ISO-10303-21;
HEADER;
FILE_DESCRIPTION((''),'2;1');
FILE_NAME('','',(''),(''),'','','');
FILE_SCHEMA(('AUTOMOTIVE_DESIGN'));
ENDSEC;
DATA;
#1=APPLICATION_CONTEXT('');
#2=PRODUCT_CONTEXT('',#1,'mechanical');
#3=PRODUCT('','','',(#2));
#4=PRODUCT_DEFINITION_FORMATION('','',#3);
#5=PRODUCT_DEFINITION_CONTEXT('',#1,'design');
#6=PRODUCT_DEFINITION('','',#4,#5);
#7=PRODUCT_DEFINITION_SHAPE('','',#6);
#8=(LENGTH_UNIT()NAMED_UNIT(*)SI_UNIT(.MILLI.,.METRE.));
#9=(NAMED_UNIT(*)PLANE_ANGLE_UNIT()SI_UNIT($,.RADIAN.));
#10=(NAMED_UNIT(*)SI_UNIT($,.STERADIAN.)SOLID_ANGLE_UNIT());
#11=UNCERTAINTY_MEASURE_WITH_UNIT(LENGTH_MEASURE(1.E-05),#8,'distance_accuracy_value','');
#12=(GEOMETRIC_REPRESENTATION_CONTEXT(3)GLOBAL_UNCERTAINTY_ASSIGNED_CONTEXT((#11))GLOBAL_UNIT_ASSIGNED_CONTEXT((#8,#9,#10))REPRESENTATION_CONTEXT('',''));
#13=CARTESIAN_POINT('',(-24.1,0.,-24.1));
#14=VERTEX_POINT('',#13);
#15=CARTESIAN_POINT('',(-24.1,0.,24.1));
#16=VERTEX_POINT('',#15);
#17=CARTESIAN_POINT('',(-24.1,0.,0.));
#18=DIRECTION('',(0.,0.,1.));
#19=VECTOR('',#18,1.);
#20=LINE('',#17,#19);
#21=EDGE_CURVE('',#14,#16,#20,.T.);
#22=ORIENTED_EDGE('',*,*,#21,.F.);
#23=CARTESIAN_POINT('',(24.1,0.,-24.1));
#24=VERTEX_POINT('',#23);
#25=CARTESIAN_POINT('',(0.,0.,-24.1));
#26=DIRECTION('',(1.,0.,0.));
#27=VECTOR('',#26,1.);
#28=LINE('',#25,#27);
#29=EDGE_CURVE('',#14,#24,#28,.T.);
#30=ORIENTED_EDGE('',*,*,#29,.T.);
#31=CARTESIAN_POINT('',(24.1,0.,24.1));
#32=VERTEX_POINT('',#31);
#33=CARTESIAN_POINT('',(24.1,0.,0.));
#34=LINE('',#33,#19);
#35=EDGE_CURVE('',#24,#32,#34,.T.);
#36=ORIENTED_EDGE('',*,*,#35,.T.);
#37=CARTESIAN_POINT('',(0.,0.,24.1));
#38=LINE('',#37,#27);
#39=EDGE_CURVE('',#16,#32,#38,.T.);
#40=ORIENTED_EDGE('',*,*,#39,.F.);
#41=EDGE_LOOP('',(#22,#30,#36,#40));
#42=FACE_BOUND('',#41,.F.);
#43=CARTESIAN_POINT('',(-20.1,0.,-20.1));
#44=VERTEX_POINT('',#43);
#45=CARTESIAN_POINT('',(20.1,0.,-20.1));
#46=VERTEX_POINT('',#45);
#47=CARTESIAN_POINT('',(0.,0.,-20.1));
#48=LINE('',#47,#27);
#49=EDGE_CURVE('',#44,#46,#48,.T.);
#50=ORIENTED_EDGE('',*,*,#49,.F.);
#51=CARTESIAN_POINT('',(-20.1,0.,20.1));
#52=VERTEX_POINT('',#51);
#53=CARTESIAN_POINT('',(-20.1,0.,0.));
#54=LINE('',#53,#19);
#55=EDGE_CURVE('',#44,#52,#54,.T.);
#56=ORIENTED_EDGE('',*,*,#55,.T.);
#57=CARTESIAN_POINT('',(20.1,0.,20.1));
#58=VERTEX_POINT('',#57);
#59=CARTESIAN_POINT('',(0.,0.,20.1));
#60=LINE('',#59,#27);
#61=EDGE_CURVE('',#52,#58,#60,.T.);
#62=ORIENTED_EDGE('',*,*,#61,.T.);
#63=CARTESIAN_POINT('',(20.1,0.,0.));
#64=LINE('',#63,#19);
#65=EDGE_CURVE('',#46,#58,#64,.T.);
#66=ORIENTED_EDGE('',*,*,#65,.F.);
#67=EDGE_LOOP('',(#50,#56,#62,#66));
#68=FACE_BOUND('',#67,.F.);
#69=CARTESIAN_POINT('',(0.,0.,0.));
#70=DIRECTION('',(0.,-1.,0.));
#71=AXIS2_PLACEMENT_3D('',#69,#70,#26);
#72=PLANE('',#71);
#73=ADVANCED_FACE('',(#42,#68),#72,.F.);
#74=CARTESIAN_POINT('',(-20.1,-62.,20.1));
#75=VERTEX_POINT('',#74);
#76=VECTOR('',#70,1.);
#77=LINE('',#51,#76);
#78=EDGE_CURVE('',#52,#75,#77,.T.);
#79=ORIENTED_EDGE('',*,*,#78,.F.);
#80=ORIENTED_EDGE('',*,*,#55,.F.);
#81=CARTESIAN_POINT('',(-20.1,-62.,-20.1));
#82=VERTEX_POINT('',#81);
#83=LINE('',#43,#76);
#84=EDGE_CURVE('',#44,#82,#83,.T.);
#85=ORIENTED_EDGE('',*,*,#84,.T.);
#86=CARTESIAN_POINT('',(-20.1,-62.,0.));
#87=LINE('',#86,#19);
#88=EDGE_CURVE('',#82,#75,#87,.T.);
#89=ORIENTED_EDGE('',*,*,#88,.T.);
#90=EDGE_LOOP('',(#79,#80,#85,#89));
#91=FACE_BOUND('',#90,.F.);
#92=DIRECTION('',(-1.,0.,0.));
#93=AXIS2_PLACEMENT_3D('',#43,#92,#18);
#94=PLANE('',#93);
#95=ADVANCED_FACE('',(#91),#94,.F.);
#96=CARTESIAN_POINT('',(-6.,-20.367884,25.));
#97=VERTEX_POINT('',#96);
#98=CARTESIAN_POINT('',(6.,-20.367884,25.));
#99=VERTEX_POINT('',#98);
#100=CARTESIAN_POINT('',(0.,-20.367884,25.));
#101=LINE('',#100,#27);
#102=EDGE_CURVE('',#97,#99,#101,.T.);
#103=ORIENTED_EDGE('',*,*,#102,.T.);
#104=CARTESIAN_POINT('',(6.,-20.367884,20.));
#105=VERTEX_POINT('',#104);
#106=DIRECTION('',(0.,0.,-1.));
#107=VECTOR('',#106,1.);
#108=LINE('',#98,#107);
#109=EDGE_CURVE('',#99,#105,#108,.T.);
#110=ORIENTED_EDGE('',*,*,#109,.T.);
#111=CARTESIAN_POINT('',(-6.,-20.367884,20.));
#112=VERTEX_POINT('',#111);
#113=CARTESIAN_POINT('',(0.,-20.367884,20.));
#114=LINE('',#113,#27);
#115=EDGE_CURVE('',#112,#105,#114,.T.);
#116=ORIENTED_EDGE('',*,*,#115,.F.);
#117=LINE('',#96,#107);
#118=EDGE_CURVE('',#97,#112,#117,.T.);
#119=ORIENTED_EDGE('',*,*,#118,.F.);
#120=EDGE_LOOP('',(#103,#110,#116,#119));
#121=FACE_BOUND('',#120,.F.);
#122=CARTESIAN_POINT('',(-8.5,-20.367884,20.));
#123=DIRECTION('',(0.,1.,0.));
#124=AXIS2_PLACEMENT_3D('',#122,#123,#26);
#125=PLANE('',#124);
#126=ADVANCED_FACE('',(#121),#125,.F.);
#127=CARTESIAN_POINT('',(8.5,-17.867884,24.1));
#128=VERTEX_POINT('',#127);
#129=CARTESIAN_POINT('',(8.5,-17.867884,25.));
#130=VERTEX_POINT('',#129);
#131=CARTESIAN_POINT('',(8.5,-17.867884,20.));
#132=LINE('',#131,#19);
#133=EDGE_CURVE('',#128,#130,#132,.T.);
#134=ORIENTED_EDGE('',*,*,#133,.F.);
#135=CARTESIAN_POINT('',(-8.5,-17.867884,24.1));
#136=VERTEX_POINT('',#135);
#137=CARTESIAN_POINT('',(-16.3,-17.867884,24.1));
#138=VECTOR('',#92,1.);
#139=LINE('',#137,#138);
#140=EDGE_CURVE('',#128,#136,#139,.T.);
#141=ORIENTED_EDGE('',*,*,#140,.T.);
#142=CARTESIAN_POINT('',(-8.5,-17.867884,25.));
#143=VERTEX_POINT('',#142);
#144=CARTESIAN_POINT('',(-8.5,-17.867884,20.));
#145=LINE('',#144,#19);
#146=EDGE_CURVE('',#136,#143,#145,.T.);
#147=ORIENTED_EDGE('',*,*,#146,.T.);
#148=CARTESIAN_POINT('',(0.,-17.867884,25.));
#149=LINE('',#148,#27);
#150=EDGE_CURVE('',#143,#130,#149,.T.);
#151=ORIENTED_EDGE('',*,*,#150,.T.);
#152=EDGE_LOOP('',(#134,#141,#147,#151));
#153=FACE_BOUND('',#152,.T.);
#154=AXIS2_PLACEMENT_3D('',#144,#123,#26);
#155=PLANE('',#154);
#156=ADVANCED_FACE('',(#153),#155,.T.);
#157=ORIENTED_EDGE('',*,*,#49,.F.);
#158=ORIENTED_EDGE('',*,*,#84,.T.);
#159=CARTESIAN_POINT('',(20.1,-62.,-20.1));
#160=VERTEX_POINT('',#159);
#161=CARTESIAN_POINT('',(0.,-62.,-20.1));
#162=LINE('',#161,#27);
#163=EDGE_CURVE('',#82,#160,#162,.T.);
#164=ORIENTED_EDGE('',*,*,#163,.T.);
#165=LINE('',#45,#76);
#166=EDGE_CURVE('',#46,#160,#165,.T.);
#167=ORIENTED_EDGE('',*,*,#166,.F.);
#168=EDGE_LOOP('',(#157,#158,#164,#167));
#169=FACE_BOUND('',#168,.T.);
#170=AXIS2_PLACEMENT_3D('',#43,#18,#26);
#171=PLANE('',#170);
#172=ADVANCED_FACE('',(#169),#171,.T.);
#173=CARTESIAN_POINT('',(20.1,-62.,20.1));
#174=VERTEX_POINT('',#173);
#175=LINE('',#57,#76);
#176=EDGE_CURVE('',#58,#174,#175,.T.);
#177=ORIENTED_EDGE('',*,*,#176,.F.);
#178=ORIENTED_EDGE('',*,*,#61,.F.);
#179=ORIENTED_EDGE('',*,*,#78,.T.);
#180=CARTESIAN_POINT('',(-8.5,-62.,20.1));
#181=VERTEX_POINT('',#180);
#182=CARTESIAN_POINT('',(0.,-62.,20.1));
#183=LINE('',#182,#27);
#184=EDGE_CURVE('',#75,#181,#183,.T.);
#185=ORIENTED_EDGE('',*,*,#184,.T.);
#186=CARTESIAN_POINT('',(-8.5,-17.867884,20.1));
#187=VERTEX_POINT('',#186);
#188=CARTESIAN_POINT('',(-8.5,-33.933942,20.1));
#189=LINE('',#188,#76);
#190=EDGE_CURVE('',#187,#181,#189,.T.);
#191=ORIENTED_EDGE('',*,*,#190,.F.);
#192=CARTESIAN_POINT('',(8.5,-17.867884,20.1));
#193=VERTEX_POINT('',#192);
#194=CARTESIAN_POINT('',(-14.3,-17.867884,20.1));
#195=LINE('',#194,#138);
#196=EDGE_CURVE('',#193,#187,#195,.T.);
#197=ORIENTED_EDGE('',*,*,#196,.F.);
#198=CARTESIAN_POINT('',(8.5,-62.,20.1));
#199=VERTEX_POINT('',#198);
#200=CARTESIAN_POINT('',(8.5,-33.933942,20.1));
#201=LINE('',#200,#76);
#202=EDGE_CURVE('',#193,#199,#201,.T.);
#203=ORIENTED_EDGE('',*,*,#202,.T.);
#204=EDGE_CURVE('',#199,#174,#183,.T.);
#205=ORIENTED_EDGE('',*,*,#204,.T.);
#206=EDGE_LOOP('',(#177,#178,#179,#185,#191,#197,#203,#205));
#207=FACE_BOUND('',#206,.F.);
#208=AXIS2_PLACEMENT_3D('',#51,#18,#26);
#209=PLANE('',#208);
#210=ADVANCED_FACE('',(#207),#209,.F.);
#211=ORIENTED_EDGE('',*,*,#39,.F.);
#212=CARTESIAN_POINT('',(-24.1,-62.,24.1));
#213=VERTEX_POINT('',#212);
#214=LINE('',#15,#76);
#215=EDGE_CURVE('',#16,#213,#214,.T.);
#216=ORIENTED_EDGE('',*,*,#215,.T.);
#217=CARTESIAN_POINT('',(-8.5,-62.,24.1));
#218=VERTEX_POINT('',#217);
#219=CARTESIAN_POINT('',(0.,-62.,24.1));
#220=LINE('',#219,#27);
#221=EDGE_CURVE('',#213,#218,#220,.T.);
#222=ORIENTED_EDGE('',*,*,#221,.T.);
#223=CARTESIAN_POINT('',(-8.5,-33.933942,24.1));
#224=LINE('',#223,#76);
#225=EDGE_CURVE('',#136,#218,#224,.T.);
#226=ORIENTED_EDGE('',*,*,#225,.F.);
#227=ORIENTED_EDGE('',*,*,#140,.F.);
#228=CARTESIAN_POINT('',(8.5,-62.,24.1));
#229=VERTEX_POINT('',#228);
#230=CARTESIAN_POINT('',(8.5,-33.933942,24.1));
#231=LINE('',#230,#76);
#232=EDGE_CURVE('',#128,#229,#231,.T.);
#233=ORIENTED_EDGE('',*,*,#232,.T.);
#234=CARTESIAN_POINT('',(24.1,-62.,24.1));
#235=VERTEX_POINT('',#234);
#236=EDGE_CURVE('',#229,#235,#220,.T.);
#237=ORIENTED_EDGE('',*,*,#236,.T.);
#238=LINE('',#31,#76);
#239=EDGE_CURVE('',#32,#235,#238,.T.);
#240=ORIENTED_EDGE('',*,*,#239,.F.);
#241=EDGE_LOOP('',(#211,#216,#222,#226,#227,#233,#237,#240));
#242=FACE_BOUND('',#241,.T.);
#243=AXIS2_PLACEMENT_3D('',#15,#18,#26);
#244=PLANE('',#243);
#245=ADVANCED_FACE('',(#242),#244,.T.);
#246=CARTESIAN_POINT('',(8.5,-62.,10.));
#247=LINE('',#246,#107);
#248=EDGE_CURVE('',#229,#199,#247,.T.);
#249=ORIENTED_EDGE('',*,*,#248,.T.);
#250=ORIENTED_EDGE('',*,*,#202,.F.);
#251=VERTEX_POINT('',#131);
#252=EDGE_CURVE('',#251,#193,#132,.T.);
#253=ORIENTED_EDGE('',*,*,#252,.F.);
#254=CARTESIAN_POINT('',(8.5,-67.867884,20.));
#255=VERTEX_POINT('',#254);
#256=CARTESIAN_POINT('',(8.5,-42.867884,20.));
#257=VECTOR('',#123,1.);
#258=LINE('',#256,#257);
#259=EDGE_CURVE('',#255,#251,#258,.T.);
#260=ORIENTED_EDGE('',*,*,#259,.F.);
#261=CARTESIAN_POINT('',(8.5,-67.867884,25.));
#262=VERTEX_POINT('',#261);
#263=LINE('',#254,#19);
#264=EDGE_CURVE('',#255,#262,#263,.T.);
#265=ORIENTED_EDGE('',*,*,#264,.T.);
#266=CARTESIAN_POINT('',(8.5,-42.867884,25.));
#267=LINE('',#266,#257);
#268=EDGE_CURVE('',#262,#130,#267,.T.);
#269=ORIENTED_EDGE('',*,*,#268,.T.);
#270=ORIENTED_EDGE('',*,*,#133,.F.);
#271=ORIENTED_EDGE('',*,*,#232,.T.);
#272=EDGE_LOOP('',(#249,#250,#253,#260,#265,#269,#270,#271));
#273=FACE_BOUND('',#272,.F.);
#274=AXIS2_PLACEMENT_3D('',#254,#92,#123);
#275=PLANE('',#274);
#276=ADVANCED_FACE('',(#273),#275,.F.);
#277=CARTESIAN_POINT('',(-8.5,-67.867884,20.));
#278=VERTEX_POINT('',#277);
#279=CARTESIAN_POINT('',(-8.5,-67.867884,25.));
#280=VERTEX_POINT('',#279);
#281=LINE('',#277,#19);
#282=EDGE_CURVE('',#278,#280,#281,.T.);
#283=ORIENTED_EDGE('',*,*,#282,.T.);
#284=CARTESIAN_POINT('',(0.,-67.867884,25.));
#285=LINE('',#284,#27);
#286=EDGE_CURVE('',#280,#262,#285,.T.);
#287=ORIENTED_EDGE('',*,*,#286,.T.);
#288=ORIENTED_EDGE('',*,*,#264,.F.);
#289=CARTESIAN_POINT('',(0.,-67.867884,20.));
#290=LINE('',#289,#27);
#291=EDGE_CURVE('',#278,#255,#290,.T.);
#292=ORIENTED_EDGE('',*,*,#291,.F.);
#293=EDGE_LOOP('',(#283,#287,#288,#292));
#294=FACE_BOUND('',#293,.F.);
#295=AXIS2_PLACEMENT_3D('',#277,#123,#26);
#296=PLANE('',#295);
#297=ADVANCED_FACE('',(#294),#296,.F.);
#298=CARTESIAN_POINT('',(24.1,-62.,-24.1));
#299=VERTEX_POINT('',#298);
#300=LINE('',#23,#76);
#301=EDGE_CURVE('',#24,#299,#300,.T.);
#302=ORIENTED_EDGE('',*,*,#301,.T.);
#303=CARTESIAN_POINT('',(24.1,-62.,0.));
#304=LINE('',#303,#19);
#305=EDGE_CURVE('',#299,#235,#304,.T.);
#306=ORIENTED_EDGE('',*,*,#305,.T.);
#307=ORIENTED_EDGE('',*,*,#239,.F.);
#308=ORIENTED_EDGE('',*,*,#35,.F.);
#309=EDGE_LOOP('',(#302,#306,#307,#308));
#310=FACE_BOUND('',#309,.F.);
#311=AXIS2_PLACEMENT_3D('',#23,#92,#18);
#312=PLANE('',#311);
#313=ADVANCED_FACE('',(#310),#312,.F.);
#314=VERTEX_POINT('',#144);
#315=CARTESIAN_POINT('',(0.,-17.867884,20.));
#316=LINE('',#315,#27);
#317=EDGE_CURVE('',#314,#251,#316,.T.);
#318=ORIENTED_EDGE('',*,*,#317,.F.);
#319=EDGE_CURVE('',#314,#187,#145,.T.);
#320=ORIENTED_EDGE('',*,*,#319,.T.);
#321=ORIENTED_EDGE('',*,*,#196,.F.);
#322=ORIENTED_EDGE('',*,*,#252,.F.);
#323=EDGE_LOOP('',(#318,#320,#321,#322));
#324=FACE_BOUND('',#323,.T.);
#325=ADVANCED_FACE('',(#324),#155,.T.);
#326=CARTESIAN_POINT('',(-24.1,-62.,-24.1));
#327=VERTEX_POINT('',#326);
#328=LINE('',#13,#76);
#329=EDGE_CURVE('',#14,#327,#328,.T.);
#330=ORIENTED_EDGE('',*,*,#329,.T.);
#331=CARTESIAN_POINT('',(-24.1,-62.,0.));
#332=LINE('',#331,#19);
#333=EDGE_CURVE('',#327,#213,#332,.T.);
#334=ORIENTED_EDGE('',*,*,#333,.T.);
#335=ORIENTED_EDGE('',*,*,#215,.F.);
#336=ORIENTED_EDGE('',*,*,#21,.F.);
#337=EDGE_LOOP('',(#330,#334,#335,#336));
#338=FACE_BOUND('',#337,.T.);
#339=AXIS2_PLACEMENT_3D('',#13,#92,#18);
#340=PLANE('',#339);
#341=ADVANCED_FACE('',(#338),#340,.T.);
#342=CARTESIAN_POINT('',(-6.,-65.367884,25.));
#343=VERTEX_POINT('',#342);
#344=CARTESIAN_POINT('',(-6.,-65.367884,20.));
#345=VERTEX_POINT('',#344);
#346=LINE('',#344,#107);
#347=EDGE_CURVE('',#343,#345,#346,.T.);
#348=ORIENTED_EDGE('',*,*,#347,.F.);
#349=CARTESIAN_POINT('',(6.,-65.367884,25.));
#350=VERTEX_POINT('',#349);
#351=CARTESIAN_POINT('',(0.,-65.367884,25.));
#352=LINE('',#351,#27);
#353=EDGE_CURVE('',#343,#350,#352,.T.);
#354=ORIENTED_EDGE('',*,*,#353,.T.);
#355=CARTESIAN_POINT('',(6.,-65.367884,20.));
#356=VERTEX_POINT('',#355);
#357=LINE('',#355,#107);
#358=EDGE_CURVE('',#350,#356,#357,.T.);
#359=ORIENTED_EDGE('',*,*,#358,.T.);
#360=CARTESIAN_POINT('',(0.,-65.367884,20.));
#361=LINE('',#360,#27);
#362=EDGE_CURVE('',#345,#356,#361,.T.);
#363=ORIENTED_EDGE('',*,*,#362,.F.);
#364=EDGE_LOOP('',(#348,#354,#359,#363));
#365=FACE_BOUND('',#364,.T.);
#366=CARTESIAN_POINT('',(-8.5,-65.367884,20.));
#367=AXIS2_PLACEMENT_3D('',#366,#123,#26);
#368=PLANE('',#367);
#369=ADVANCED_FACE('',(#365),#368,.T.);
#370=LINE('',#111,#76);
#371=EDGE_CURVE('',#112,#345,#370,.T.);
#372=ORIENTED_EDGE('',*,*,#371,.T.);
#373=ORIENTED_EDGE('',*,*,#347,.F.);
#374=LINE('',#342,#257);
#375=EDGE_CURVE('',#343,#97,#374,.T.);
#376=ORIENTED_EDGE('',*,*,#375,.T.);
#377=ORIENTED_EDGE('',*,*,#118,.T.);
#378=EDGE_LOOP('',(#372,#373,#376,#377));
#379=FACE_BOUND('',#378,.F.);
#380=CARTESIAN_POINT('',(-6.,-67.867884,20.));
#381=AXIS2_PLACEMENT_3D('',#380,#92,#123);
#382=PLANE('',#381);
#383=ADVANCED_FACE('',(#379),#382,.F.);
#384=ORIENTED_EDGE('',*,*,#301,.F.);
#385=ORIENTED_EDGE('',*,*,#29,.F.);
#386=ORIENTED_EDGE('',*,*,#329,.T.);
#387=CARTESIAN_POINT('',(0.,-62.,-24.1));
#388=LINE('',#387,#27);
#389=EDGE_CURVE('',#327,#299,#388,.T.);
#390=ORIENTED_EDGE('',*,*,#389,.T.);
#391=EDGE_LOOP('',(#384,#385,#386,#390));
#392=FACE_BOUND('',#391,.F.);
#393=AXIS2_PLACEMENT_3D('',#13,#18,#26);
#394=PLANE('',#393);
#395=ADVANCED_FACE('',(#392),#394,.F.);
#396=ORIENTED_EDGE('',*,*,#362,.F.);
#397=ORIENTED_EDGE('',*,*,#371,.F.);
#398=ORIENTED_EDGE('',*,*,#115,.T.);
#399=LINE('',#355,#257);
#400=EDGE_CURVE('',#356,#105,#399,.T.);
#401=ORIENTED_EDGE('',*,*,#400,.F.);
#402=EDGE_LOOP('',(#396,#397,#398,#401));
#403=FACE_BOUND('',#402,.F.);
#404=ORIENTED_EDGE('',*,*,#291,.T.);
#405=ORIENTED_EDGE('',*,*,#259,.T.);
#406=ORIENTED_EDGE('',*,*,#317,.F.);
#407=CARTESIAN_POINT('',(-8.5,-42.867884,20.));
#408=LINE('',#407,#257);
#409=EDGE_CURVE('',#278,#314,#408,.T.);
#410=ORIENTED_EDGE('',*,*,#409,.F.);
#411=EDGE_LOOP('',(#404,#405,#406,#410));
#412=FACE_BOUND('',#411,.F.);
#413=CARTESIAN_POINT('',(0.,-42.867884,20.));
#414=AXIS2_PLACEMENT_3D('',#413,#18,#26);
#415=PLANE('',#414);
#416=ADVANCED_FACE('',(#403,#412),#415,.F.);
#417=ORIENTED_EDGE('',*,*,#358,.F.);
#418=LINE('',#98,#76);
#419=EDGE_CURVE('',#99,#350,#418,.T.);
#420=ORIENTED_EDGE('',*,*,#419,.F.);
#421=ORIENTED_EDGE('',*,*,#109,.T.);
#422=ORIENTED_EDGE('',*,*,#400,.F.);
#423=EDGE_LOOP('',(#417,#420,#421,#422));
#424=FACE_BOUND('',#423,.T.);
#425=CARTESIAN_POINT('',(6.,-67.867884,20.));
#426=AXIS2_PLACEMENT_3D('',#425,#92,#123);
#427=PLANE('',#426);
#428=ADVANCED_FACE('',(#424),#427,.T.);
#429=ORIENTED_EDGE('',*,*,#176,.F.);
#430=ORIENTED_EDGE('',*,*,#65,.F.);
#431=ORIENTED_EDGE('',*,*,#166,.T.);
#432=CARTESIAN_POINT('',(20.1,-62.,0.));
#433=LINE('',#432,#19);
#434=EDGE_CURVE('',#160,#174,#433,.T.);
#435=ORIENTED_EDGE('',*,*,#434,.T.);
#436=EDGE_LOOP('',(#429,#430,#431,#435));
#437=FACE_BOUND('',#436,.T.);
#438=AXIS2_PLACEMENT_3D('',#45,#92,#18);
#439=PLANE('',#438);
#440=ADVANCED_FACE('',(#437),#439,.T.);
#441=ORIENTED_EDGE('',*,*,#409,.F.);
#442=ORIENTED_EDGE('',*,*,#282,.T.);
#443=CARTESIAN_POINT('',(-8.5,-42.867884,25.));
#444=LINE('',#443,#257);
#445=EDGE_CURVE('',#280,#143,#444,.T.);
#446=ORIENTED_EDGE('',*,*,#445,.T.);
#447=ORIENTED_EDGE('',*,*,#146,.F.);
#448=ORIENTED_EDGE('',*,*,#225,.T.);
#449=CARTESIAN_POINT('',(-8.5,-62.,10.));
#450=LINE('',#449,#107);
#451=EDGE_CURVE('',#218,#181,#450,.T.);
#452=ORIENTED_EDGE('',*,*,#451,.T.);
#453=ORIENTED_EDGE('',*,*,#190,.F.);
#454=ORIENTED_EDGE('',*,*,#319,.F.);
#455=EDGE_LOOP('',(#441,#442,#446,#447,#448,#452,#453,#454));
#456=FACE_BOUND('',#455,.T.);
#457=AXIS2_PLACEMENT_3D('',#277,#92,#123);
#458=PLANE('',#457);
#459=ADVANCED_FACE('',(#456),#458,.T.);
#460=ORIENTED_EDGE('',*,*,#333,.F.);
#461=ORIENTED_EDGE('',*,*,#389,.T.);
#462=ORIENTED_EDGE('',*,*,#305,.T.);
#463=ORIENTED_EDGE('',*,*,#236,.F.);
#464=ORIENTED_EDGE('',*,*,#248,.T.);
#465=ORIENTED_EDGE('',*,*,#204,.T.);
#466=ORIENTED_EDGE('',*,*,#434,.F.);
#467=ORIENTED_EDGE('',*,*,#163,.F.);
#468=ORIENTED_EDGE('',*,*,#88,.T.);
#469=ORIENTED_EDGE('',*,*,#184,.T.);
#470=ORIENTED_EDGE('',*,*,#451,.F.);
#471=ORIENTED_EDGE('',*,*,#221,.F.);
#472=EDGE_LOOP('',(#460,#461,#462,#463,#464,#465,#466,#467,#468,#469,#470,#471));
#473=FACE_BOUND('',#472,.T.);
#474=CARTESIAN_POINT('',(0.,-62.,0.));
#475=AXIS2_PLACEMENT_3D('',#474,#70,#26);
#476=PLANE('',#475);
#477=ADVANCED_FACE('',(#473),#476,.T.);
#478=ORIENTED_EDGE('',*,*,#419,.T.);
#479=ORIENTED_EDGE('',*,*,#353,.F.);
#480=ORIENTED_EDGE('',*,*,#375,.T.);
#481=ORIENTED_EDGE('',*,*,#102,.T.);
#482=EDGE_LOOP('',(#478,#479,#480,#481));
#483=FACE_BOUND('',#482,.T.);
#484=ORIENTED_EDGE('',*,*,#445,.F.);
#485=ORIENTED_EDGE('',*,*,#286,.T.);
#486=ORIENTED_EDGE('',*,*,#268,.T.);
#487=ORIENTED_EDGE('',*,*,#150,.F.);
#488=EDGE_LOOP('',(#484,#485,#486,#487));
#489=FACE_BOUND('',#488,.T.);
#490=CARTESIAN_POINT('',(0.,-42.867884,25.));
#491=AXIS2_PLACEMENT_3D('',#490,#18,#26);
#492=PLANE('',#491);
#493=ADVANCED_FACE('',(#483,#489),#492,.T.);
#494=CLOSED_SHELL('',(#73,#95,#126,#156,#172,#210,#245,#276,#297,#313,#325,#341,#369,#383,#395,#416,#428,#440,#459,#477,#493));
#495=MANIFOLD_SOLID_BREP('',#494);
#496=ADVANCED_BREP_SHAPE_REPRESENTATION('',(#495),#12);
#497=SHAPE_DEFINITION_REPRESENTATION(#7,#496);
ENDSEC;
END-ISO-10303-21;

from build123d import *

# Parameters (mm, degrees)
F0_W        = 48.2
F0_H        = 48.2
F0_W_2      = 40.2
F0_H_2      = 40.2
F1_DEPTH    = 62
F3_START    = 20
F2_W        = 17
F2_H        = 50
F3_DEPTH    = 5
F4_T        = 2.5
F4_T3_DEPTH = 49.1321159601
F4_T5_DEPTH = 22
F4_T7_DEPTH = 9
F4_T9_DEPTH = 67


# Not quite as in the source:
# - a shell that OpenCascade refuses in one call is made with other operations: the cavity is built on its own and cut out


with BuildPart() as f1:
    # F0 (on Front) → F1 (new body)
    with BuildSketch(Plane.XZ):
        Rectangle(F0_W, F0_H)
        Rectangle(F0_W_2, F0_H_2, mode=Mode.SUBTRACT)
    extrude(amount=F1_DEPTH)

    # F2 (on Top) → F3 (join)
    with BuildSketch(Plane.XY.offset(F3_START)):
        with Locations((0, -42.8678840399)):
            Rectangle(F2_W, F2_H)
    extrude(amount=F3_DEPTH)

    # F4: shell of thickness 2.5, made by hand


with BuildPart() as f4_core1:
    # F4_t2: copy of F1
    add(f1.part)

    # the walls: a layer under each face that stays
    f4_faces = [f4_core1.faces().sort_by_distance(p)[0] for p in [
        (24.1, -31, 0),
        (0, -31, -24.1),
        (16.0666666667, -51.6666666667, 24.1),
        (-20.6571428571, 0, -20.6571428571),
        (-20.6571428571, -62, -20.6571428571),
        (-24.1, -31, 0),
        (-8.5, -26.2012173732, 24.1666666667),
        (0, -17.8678840399, 24.55),
        (8.5, -59.5345507065, 24.1666666667),
        (20.1, -31, 0),
        (0, -31, -20.1),
        (-20.1, -31, 0),
        (-13.4, -51.6666666667, 20.1),
        (0, -67.8678840399, 22.5),
        (0, -17.8678840399, 20.05),
    ]]
    thicken(f4_faces, amount=-F4_T, mode=Mode.SUBTRACT)

    # F4_s4 → F4_t3 (cut)
    with BuildSketch(Plane.XZ.offset(15.3678840399)):
        Polygon((-8.525, 24.125), (-8.5, 21.6), (-6, 21.6), (-6, 24.1), align=None)
        Polygon((8.525, 24.125), (8.5, 21.6), (6, 21.6), (6, 24.1), align=None)
        Polygon((-8.525, 20.075), (-6, 20.1), (-6, 22.6), (-8.5, 22.6), align=None)
        Polygon((8.525, 20.075), (6, 20.1), (6, 22.6), (8.5, 22.6), align=None)
    extrude(amount=F4_T3_DEPTH, mode=Mode.SUBTRACT)

    # F4_s6 → F4_t5 (cut)
    with BuildSketch(Plane.YZ.offset(-11)):
        Polygon((-17.8428840399, 24.125), (-17.8678840399, 21.6), (-20.3678840399, 21.6), (-20.3678840399, 24.1), align=None)
        Polygon((-17.8428840399, 20.075), (-17.8678840399, 22.6), (-20.3678840399, 22.6), (-20.3678840399, 20.1), align=None)
    extrude(amount=F4_T5_DEPTH, mode=Mode.SUBTRACT)

    # F4_s8 → F4_t7 (cut)
    with BuildSketch(Plane.XY.offset(17.6)):
        Polygon((-8.525, -62.025), (-8.5, -59.5), (-6, -59.5), (-6, -62), align=None)
        Polygon((8.525, -62.025), (8.5, -59.5), (6, -59.5), (6, -62), align=None)
    extrude(amount=F4_T7_DEPTH, mode=Mode.SUBTRACT)

    # F4_s10 → F4_t9 (cut)
    with BuildSketch(Plane.XZ.offset(-2.5)):
        Polygon((20.075, 20.075), (22.6, 20.1), (22.6, 22.6), (20.1, 22.6), align=None)
        Polygon((20.075, -20.075), (22.6, -20.1), (22.6, -22.6), (20.1, -22.6), align=None)
        Polygon((-20.075, -20.075), (-20.1, -22.6), (-22.6, -22.6), (-22.6, -20.1), align=None)
        Polygon((-20.075, 20.075), (-22.6, 20.1), (-22.6, 22.6), (-20.1, 22.6), align=None)
    extrude(amount=F4_T9_DEPTH, mode=Mode.SUBTRACT)


with BuildPart() as f1_1:
    add(f1.part)

    # what is left inside the walls is the cavity
    f4_cavity = [f4_core1.part.solids().sort_by_distance(p)[0] for p in [
        (0, -50.367884, 20.025),
    ]]
    add(f4_cavity, mode=Mode.SUBTRACT)


solid = f1_1.part
